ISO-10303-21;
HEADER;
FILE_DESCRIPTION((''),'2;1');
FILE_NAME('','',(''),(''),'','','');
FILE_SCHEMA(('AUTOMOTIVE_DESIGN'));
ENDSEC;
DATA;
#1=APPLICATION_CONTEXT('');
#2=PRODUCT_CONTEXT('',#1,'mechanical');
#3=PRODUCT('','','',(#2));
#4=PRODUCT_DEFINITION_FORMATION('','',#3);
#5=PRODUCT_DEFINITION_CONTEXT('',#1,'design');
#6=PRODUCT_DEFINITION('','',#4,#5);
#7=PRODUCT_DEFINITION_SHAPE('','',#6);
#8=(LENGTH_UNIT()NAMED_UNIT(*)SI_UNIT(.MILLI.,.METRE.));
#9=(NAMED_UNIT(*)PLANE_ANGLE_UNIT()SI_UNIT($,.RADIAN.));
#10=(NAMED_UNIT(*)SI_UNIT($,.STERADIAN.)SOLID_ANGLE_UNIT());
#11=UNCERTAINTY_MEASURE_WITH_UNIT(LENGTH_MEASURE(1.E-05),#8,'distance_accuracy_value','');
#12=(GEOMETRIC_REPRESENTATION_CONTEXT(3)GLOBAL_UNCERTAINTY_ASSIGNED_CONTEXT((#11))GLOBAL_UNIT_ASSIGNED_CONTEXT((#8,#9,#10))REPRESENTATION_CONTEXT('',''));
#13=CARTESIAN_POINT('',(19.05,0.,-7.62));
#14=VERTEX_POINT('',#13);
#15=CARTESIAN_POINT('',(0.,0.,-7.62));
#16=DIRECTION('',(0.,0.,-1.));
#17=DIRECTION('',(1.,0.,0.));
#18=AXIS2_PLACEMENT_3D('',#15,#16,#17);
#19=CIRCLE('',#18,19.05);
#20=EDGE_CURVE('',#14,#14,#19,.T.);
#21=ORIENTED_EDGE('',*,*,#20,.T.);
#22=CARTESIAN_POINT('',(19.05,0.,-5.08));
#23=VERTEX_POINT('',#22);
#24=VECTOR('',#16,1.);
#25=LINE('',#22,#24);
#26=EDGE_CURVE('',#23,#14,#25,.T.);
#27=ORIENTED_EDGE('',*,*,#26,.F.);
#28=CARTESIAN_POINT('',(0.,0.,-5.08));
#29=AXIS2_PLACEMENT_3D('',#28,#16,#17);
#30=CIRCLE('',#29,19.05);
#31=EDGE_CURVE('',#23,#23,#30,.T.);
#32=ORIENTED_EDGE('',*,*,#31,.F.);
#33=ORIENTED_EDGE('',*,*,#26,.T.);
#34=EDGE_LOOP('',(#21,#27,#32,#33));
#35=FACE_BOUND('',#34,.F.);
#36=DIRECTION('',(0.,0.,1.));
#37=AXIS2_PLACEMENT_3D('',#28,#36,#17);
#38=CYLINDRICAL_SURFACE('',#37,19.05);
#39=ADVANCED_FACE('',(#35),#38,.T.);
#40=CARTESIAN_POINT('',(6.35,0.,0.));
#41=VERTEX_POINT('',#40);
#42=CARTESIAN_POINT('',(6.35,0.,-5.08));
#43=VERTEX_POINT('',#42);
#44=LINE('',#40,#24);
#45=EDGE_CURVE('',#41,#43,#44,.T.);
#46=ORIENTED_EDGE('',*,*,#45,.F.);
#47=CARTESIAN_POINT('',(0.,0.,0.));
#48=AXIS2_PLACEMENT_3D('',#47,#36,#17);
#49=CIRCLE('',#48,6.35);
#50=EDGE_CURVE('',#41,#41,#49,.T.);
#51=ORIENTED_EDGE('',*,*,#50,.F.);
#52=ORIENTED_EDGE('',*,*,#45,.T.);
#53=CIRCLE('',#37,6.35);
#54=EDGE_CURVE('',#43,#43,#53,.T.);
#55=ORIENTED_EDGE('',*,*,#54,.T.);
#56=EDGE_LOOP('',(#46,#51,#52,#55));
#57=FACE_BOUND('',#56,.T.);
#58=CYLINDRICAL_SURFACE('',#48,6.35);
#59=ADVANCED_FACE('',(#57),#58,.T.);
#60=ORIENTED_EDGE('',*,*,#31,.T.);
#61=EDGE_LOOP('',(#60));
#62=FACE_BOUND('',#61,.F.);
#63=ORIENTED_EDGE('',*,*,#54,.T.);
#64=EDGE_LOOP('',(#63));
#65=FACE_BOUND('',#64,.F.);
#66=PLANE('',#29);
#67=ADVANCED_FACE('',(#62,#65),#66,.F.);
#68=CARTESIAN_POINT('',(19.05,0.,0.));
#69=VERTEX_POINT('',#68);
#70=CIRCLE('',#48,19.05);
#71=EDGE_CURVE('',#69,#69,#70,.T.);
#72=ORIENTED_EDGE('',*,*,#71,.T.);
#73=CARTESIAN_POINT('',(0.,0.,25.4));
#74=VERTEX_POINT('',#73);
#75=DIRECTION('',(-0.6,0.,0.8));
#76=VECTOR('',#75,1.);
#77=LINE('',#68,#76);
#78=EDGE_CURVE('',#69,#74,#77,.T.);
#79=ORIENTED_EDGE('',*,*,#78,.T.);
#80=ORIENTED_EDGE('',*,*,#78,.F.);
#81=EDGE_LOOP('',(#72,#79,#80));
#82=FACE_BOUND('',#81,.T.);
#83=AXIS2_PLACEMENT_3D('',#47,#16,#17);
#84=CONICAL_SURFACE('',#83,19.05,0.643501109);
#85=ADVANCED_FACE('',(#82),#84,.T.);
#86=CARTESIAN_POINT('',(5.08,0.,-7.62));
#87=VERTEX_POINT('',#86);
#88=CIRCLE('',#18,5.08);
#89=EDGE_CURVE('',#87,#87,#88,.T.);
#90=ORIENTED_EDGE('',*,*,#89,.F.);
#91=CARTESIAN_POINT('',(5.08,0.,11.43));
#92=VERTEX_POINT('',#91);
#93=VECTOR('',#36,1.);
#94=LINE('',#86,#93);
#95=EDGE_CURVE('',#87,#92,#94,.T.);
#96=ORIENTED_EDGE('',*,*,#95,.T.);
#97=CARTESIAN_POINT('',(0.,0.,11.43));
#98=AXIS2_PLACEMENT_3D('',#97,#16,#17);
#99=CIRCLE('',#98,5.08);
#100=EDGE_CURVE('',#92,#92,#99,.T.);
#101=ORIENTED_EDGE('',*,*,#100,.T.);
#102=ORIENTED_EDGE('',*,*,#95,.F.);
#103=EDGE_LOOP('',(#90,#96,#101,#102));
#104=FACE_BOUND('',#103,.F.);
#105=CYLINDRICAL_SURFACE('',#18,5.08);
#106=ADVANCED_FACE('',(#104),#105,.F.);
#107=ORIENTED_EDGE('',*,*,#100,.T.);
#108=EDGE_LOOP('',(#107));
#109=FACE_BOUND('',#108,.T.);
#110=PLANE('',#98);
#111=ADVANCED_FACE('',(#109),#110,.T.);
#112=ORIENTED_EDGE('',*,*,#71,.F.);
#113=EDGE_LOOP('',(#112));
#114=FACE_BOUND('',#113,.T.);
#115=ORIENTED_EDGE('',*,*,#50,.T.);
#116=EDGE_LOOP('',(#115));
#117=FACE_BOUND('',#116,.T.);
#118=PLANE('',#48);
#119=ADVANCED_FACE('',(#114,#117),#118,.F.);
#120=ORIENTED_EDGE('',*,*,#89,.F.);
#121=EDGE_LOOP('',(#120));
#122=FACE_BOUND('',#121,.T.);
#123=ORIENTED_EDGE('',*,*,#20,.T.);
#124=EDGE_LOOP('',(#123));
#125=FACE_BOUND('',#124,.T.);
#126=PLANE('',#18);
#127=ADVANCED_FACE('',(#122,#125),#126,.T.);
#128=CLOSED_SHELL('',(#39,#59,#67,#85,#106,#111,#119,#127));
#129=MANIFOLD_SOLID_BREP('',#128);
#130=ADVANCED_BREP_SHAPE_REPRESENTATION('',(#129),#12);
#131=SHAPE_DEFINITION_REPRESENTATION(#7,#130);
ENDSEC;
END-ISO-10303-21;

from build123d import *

# Parameters (mm, degrees)
F3_R     = 6.35
F4_DEPTH = 5.08
F5_R     = 19.05
F5_R_2   = 6.35
F6_DEPTH = 2.54
F7_R     = 5.08
F8_DEPTH = 19.05


with BuildPart() as f2:
    # F1 (on Front) → F2 (revolve)
    with BuildSketch(Plane.XZ):
        Polygon((0, 25.4), (0, 0), (19.05, 0), align=None)
    revolve(axis=Axis((0, 0, 12.7), (0, 0, 1)))

    # F3 (on face) → F4 (join)
    with BuildSketch(Plane.XY):
        Circle(F3_R)
    extrude(amount=-F4_DEPTH)

    # F5 (on face) → F6 (join)
    with BuildSketch(Plane(origin=(0, 0, -5.08), x_dir=(1, 0, 0), z_dir=(0, 0, -1))):
        Circle(F5_R)
        Circle(F5_R_2, mode=Mode.SUBTRACT)
        Circle(F5_R_2)
    extrude(amount=F6_DEPTH)

    # F7 (on face) → F8 (cut)
    with BuildSketch(Plane(origin=(0, 0, -7.62), x_dir=(1, 0, 0), z_dir=(0, 0, -1))):
        Circle(F7_R)
    extrude(amount=-F8_DEPTH, mode=Mode.SUBTRACT)


solid = f2.part
